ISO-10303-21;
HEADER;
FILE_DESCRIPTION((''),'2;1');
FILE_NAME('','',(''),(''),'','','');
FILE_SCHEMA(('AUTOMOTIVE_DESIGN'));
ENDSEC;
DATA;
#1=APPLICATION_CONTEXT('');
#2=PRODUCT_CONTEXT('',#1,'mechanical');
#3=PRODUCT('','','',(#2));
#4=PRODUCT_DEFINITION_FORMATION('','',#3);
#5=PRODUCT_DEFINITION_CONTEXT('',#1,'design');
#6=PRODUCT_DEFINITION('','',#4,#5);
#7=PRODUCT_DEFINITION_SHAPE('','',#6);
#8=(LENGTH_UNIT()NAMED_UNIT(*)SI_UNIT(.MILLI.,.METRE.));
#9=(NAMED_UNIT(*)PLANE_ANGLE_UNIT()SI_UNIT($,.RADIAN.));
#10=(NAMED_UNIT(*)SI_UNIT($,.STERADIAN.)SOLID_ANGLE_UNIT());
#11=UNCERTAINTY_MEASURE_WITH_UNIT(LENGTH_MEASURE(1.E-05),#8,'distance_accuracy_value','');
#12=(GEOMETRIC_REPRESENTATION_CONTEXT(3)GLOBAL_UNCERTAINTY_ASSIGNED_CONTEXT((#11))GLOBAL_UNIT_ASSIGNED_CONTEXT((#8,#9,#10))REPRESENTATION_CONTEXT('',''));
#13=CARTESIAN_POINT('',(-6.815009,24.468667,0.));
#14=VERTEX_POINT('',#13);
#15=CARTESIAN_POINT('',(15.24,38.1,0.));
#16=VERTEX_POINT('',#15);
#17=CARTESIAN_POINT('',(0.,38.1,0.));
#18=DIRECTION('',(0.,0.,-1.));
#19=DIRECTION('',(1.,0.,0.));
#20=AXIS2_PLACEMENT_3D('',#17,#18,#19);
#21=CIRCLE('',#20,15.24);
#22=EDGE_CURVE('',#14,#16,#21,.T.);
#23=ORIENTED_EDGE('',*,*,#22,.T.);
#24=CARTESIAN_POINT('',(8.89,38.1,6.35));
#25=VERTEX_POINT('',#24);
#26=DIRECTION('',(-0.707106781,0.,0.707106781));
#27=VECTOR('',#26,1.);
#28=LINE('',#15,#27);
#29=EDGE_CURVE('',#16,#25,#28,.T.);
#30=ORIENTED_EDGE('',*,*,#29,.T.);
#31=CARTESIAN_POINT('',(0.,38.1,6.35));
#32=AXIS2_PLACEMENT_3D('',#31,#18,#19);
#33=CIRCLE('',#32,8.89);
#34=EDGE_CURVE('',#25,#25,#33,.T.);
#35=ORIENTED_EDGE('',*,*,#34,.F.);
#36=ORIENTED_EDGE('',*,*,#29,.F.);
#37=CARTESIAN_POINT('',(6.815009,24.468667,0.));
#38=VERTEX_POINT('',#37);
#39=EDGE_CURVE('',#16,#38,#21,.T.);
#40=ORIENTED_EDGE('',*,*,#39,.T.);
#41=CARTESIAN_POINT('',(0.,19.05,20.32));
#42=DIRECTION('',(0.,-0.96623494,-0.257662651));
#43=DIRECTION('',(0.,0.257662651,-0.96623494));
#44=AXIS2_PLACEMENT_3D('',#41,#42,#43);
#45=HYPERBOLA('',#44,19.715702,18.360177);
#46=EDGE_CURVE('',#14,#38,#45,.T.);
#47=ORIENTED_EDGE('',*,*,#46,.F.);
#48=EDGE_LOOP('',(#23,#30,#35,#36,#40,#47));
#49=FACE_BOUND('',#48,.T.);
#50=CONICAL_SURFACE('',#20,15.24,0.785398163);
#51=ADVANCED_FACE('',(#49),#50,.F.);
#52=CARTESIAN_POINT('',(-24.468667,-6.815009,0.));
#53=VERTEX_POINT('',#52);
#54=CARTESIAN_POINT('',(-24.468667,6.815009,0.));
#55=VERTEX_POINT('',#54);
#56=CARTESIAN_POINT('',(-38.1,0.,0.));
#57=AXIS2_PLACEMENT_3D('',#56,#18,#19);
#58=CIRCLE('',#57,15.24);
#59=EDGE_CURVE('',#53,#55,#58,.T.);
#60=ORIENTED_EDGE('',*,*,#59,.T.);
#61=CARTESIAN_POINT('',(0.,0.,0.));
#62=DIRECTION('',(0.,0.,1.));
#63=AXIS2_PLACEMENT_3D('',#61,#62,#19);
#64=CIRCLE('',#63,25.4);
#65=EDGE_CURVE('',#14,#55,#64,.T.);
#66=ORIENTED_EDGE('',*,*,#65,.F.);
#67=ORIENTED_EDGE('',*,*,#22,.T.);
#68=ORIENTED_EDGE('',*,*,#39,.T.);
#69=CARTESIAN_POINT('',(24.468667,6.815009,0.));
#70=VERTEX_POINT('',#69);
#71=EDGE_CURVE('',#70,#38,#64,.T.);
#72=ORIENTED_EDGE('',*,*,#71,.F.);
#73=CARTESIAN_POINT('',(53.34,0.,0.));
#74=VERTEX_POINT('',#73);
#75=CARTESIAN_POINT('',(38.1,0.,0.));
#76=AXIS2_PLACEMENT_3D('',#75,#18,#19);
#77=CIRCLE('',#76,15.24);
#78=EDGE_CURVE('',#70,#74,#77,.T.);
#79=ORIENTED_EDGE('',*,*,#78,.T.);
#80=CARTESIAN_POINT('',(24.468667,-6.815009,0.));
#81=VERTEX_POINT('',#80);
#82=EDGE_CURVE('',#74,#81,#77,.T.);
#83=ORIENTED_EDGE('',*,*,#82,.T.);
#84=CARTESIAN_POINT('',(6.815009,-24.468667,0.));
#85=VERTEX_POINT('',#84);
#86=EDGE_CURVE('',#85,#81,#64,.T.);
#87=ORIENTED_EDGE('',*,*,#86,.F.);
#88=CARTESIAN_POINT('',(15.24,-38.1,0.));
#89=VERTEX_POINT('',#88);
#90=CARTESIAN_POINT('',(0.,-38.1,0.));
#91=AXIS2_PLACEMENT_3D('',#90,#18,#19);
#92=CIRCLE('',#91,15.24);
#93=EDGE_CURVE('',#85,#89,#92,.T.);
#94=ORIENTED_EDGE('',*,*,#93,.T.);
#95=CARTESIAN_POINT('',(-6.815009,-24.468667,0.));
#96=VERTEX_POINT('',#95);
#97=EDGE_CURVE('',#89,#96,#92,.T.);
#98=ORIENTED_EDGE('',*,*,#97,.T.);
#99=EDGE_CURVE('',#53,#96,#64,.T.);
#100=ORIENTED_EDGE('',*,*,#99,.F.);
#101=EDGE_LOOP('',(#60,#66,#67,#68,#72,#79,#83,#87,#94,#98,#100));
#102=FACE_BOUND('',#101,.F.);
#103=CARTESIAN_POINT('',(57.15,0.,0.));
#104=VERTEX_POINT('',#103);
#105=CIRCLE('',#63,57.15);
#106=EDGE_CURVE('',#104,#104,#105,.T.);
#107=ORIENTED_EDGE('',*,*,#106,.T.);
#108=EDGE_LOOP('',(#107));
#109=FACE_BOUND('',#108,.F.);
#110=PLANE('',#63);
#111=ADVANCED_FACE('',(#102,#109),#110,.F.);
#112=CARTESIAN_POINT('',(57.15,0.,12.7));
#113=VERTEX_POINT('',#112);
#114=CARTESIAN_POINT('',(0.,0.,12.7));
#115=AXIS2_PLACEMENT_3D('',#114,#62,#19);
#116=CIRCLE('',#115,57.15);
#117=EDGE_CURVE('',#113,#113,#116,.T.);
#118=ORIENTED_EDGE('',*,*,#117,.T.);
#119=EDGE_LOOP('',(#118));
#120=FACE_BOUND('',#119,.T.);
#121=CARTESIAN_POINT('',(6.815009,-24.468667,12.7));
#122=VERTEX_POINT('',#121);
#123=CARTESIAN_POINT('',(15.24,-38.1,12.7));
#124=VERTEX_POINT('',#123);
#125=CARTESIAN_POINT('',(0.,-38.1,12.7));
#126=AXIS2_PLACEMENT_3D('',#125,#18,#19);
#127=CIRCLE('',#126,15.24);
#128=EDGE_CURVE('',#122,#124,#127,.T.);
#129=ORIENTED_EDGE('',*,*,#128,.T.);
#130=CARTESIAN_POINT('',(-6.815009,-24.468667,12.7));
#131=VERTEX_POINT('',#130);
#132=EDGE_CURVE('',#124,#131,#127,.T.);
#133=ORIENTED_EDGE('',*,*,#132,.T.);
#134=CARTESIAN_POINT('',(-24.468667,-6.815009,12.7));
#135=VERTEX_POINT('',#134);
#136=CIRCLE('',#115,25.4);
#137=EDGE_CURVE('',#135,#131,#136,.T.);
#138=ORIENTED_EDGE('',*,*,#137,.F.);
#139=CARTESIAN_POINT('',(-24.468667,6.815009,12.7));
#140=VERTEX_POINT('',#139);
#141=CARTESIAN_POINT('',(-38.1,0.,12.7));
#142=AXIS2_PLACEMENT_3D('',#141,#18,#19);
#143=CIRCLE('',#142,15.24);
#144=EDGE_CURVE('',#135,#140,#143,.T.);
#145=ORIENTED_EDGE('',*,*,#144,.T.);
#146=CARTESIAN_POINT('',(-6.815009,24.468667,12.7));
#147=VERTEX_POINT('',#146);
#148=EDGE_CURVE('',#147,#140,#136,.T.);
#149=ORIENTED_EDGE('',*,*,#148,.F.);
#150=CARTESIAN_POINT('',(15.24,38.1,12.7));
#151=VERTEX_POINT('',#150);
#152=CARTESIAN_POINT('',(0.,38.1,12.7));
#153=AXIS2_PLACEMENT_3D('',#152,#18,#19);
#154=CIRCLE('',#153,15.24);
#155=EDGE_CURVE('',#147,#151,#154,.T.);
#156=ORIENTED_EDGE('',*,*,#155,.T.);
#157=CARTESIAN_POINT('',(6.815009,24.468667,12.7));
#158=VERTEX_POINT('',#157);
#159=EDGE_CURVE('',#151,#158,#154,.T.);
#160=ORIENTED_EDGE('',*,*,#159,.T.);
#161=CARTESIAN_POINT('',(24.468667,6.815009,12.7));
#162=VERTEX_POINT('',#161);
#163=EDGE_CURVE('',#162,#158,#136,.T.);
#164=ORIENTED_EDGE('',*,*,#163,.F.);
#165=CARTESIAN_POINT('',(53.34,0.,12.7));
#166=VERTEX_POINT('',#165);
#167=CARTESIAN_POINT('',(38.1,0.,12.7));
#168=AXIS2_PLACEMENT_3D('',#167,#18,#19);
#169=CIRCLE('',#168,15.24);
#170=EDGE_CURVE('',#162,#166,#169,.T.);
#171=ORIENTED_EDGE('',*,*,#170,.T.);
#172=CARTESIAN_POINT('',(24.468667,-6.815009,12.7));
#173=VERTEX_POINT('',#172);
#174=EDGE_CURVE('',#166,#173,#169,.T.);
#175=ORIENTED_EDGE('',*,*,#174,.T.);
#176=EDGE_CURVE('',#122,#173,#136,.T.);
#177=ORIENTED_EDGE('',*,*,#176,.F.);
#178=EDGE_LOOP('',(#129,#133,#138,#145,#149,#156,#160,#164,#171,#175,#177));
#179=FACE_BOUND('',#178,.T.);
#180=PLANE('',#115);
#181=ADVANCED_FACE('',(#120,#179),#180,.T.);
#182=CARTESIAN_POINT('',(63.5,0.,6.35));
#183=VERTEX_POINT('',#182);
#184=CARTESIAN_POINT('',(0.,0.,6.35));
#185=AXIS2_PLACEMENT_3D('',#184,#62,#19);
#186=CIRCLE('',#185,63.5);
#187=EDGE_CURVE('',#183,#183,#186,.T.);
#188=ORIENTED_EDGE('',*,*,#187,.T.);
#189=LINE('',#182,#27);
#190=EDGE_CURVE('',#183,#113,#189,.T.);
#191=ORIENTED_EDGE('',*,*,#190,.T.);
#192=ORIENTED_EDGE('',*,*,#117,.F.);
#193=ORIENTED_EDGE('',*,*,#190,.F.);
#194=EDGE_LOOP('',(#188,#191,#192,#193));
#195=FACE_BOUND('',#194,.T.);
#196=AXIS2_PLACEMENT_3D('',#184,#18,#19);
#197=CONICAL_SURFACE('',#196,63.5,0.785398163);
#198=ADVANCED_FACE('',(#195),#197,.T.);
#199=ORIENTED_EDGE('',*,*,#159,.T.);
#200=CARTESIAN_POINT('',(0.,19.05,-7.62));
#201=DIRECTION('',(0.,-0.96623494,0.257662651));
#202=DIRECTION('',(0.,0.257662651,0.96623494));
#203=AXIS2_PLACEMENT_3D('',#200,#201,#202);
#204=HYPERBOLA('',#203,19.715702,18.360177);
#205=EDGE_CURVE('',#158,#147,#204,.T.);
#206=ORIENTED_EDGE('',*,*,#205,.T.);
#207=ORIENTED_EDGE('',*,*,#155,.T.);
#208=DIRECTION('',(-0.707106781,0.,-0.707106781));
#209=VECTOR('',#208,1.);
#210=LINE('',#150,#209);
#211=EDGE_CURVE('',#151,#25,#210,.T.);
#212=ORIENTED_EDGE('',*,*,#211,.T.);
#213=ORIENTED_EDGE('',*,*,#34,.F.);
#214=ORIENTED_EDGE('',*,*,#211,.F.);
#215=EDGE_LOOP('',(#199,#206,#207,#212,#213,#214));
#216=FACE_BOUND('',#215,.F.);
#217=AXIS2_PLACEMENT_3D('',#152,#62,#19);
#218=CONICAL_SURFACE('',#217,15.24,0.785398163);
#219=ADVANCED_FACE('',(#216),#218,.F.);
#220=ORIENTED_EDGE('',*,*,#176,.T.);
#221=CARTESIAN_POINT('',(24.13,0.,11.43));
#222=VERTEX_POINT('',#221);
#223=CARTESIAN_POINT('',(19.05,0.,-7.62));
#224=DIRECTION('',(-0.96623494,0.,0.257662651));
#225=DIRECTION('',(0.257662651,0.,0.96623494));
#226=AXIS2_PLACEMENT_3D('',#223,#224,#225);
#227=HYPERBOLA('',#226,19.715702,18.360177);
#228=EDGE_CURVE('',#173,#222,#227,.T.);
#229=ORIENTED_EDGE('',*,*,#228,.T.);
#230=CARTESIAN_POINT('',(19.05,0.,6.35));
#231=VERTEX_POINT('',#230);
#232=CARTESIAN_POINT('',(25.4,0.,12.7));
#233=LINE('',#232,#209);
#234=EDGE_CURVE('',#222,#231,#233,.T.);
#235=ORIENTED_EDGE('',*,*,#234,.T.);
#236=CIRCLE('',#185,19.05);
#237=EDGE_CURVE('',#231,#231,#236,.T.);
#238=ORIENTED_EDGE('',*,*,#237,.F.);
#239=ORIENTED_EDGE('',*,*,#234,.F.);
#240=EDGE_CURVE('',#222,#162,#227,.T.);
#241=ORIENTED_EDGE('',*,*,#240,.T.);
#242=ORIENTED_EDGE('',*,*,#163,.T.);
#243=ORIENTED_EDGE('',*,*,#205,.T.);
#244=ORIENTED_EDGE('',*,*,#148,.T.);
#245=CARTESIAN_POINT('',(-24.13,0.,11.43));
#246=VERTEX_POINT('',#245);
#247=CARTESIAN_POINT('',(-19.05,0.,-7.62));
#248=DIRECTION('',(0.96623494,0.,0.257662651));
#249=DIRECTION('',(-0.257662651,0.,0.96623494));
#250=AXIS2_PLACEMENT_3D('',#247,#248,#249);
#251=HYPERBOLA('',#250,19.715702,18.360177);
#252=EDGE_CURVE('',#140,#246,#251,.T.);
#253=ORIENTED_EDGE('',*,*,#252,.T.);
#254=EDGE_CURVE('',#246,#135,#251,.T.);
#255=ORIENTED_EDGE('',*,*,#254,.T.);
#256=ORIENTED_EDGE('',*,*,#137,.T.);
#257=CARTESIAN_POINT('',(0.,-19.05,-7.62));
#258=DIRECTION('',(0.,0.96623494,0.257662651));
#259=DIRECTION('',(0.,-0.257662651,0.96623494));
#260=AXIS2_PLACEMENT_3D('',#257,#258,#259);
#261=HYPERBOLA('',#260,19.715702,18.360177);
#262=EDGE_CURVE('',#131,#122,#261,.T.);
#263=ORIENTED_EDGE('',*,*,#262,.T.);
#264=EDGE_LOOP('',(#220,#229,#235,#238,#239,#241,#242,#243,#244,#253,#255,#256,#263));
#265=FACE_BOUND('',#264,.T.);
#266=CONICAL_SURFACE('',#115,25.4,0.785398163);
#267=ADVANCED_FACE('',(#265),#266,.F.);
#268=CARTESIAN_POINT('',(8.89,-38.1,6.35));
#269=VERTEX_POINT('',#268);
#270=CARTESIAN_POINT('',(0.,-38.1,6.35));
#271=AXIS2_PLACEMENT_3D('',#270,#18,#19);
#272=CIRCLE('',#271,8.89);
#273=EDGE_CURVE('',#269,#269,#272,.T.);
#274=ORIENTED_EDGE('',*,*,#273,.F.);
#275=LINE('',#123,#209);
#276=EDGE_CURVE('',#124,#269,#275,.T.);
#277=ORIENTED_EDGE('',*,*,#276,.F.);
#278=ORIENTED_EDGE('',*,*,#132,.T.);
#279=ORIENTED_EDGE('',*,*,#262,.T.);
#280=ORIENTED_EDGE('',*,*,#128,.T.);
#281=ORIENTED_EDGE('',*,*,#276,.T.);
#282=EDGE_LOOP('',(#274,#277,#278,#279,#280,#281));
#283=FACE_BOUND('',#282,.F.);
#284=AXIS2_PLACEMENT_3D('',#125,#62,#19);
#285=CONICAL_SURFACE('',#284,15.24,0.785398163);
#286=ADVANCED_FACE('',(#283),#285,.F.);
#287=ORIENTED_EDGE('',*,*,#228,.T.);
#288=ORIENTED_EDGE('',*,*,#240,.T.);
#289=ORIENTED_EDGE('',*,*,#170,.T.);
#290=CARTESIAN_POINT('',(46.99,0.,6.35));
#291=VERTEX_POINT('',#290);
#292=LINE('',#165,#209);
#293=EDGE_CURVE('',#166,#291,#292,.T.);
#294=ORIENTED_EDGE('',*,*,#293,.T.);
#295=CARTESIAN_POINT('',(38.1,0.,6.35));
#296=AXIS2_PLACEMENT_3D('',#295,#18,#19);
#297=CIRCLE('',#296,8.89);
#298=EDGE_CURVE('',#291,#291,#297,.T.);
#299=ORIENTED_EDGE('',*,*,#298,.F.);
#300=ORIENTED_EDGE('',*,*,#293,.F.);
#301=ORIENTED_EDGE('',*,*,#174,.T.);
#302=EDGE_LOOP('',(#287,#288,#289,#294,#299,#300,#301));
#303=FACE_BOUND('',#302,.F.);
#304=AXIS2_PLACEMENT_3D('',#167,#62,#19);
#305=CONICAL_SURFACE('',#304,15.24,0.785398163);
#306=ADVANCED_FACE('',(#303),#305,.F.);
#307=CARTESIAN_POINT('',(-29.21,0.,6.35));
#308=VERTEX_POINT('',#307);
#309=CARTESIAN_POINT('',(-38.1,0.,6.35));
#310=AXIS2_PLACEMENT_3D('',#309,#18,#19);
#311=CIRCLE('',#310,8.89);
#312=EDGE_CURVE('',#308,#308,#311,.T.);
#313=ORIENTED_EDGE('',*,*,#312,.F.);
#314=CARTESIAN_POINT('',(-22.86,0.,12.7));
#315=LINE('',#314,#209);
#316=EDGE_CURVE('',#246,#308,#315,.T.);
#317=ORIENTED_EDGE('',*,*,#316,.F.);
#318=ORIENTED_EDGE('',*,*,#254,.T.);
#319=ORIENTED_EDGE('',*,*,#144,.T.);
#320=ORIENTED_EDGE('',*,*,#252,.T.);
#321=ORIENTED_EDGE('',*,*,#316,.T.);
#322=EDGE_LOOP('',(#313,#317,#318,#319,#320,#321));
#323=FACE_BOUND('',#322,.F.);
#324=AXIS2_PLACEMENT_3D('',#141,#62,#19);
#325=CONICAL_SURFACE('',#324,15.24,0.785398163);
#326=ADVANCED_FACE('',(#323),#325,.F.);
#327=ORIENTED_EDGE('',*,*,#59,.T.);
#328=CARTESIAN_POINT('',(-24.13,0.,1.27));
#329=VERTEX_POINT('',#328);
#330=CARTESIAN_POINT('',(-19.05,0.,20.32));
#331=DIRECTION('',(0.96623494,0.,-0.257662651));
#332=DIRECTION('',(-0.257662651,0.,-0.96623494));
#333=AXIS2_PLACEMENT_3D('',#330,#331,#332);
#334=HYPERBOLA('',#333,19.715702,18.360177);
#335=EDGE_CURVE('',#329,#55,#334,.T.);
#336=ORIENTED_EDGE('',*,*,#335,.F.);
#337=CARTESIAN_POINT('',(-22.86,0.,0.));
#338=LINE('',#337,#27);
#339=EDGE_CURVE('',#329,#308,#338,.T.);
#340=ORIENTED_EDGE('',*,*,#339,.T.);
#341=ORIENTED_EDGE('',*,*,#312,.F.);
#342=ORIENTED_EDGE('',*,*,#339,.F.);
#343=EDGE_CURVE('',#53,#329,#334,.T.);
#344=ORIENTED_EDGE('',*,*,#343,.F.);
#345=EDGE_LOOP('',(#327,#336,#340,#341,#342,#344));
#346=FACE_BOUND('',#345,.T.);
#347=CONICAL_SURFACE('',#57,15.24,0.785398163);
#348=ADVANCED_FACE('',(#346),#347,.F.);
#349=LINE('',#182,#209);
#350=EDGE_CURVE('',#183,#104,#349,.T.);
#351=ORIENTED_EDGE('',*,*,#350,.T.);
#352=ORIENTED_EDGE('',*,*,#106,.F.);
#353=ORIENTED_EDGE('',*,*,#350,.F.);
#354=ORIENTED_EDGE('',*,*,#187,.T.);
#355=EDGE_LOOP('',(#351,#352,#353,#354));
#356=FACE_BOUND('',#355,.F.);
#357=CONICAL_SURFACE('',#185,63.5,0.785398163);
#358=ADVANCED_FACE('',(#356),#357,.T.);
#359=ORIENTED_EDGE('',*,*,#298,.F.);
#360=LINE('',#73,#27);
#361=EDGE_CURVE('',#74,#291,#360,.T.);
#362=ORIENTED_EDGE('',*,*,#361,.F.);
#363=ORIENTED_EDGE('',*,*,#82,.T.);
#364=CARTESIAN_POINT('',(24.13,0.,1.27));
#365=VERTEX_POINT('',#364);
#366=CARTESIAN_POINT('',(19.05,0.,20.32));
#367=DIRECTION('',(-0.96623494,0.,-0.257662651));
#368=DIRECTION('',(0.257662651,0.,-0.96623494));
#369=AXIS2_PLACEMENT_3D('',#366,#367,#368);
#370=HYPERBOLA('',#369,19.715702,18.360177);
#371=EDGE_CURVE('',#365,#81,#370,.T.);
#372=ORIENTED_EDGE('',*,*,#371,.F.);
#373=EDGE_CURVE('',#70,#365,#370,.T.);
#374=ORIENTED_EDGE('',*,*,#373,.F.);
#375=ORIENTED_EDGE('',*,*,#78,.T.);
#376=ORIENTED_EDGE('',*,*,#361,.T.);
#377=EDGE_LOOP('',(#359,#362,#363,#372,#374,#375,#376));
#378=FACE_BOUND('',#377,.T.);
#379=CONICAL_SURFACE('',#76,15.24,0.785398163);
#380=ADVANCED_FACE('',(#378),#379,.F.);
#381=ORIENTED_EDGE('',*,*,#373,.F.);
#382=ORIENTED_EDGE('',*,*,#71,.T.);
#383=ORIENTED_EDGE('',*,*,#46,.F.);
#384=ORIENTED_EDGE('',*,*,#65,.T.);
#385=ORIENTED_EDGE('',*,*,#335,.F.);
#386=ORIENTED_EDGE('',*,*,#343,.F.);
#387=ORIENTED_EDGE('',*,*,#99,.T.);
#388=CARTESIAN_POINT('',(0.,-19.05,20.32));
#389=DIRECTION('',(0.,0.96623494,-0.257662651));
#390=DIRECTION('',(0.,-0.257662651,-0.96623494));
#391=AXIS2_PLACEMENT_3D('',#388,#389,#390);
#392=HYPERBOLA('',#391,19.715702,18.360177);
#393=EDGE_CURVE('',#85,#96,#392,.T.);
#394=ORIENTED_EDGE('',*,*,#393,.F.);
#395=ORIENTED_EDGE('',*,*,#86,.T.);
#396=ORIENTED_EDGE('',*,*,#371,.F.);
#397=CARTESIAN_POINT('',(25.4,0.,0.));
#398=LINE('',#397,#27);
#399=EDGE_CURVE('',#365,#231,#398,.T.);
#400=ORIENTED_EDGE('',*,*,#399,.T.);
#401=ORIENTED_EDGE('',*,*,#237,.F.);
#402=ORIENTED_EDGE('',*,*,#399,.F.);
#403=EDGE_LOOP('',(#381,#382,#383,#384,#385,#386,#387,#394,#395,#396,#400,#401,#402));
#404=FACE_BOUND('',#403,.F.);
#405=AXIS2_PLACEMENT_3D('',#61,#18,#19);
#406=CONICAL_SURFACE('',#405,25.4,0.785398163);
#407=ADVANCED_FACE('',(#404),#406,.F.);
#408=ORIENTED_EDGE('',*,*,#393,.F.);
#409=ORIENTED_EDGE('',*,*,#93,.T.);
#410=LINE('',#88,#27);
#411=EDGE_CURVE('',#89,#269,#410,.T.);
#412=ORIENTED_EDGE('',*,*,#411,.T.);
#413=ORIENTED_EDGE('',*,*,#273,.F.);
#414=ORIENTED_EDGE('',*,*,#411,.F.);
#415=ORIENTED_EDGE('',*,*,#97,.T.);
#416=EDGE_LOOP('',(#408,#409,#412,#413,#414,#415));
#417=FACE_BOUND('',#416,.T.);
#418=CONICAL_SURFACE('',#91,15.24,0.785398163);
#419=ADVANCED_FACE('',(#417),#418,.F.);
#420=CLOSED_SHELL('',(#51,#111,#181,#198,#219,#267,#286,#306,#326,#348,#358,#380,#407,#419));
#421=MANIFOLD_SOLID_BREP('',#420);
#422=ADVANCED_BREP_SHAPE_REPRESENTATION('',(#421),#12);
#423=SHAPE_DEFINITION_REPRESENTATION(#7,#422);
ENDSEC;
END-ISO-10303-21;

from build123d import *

# Parameters (mm, degrees)
F0_R     = 63.5
F0_R_2   = 19.05
F1_DEPTH = 12.7
F3_D     = 17.78


# Not quite as in the source:
# - a fillet or chamfer that OpenCascade refuses, or shapes differently, is made with other operations: its cross-section is extruded or revolved along the edge and cut away or added


with BuildPart() as f1:
    # F0 (on Top) → F1 (new body)
    with BuildSketch(Plane.XY):
        Circle(F0_R)
        Circle(F0_R_2, mode=Mode.SUBTRACT)
    extrude(amount=F1_DEPTH)

    # F3 (through all)
    with Locations(Plane(origin=(0, 0, 0), x_dir=(1, 0, 0), z_dir=(0, 0, -1))):
        with Locations((0, -38.1), (-38.1, 0), (0, 38.1), (38.1, 0)):
            Hole(F3_D / 2)

    # F4: chamfer of 6.35 on 12 edges, made by hand

    # F4_s1 → F4_t2 (revolve, cut)
    with BuildSketch(Plane.XZ):
        Polygon((25.4, 0), (19.05, 6.35), (19.05, 0), align=None)
    revolve(axis=Axis((0, 0, 0), (0, 0, 1)), mode=Mode.SUBTRACT)

    # F4_s3 → F4_t4 (revolve, cut)
    with BuildSketch(Plane.XZ):
        Polygon((25.4, 12.7), (19.05, 6.35), (19.05, 12.7), align=None)
    revolve(axis=Axis((0, 0, 12.7), (0, 0, 1)), mode=Mode.SUBTRACT)

    # F4_s5 → F4_t6 (revolve, cut)
    with BuildSketch(Plane.XZ):
        Polygon((63.5, 6.35), (57.15, 12.7), (63.5, 12.7), align=None)
    revolve(axis=Axis((0, 0, 12.7), (0, 0, 1)), mode=Mode.SUBTRACT)

    # F4_s7 → F4_t8 (revolve, cut)
    with BuildSketch(Plane.XZ):
        Polygon((63.5, 6.35), (57.15, 0), (63.5, 0), align=None)
    revolve(axis=Axis((0, 0, 0), (0, 0, 1)), mode=Mode.SUBTRACT)

    # F4_s9 → F4_t10 (revolve, cut)
    with BuildSketch(Plane.XZ.offset(38.1)):
        Polygon((15.24, 0), (8.89, 6.35), (8.89, 0), align=None)
    revolve(axis=Axis((0, -38.1, 0), (0, 0, -1)), mode=Mode.SUBTRACT)

    # F4_s11 → F4_t12 (revolve, cut)
    with BuildSketch(Plane.XZ):
        Polygon((-22.86, 0), (-29.21, 6.35), (-29.21, 0), align=None)
    revolve(axis=Axis((-38.1, 0, 0), (0, 0, -1)), mode=Mode.SUBTRACT)

    # F4_s13 → F4_t14 (revolve, cut)
    with BuildSketch(Plane.XZ):
        Polygon((53.34, 0), (46.99, 6.35), (46.99, 0), align=None)
    revolve(axis=Axis((38.1, 0, 0), (0, 0, -1)), mode=Mode.SUBTRACT)

    # F4_s15 → F4_t16 (revolve, cut)
    with BuildSketch(Plane.XZ.offset(-38.1)):
        Polygon((15.24, 0), (8.89, 6.35), (8.89, 0), align=None)
    revolve(axis=Axis((0, 38.1, 0), (0, 0, -1)), mode=Mode.SUBTRACT)

    # F4_s17 → F4_t18 (revolve, cut)
    with BuildSketch(Plane.XZ.offset(38.1)):
        Polygon((15.24, 12.7), (8.89, 6.35), (8.89, 12.7), align=None)
    revolve(axis=Axis((0, -38.1, 12.7), (0, 0, -1)), mode=Mode.SUBTRACT)

    # F4_s19 → F4_t20 (revolve, cut)
    with BuildSketch(Plane.XZ):
        Polygon((-22.86, 12.7), (-29.21, 6.35), (-29.21, 12.7), align=None)
    revolve(axis=Axis((-38.1, 0, 12.7), (0, 0, -1)), mode=Mode.SUBTRACT)

    # F4_s21 → F4_t22 (revolve, cut)
    with BuildSketch(Plane.XZ):
        Polygon((53.34, 12.7), (46.99, 6.35), (46.99, 12.7), align=None)
    revolve(axis=Axis((38.1, 0, 12.7), (0, 0, -1)), mode=Mode.SUBTRACT)

    # F4_s23 → F4_t24 (revolve, cut)
    with BuildSketch(Plane.XZ.offset(-38.1)):
        Polygon((15.24, 12.7), (8.89, 6.35), (8.89, 12.7), align=None)
    revolve(axis=Axis((0, 38.1, 12.7), (0, 0, -1)), mode=Mode.SUBTRACT)


solid = f1.part
